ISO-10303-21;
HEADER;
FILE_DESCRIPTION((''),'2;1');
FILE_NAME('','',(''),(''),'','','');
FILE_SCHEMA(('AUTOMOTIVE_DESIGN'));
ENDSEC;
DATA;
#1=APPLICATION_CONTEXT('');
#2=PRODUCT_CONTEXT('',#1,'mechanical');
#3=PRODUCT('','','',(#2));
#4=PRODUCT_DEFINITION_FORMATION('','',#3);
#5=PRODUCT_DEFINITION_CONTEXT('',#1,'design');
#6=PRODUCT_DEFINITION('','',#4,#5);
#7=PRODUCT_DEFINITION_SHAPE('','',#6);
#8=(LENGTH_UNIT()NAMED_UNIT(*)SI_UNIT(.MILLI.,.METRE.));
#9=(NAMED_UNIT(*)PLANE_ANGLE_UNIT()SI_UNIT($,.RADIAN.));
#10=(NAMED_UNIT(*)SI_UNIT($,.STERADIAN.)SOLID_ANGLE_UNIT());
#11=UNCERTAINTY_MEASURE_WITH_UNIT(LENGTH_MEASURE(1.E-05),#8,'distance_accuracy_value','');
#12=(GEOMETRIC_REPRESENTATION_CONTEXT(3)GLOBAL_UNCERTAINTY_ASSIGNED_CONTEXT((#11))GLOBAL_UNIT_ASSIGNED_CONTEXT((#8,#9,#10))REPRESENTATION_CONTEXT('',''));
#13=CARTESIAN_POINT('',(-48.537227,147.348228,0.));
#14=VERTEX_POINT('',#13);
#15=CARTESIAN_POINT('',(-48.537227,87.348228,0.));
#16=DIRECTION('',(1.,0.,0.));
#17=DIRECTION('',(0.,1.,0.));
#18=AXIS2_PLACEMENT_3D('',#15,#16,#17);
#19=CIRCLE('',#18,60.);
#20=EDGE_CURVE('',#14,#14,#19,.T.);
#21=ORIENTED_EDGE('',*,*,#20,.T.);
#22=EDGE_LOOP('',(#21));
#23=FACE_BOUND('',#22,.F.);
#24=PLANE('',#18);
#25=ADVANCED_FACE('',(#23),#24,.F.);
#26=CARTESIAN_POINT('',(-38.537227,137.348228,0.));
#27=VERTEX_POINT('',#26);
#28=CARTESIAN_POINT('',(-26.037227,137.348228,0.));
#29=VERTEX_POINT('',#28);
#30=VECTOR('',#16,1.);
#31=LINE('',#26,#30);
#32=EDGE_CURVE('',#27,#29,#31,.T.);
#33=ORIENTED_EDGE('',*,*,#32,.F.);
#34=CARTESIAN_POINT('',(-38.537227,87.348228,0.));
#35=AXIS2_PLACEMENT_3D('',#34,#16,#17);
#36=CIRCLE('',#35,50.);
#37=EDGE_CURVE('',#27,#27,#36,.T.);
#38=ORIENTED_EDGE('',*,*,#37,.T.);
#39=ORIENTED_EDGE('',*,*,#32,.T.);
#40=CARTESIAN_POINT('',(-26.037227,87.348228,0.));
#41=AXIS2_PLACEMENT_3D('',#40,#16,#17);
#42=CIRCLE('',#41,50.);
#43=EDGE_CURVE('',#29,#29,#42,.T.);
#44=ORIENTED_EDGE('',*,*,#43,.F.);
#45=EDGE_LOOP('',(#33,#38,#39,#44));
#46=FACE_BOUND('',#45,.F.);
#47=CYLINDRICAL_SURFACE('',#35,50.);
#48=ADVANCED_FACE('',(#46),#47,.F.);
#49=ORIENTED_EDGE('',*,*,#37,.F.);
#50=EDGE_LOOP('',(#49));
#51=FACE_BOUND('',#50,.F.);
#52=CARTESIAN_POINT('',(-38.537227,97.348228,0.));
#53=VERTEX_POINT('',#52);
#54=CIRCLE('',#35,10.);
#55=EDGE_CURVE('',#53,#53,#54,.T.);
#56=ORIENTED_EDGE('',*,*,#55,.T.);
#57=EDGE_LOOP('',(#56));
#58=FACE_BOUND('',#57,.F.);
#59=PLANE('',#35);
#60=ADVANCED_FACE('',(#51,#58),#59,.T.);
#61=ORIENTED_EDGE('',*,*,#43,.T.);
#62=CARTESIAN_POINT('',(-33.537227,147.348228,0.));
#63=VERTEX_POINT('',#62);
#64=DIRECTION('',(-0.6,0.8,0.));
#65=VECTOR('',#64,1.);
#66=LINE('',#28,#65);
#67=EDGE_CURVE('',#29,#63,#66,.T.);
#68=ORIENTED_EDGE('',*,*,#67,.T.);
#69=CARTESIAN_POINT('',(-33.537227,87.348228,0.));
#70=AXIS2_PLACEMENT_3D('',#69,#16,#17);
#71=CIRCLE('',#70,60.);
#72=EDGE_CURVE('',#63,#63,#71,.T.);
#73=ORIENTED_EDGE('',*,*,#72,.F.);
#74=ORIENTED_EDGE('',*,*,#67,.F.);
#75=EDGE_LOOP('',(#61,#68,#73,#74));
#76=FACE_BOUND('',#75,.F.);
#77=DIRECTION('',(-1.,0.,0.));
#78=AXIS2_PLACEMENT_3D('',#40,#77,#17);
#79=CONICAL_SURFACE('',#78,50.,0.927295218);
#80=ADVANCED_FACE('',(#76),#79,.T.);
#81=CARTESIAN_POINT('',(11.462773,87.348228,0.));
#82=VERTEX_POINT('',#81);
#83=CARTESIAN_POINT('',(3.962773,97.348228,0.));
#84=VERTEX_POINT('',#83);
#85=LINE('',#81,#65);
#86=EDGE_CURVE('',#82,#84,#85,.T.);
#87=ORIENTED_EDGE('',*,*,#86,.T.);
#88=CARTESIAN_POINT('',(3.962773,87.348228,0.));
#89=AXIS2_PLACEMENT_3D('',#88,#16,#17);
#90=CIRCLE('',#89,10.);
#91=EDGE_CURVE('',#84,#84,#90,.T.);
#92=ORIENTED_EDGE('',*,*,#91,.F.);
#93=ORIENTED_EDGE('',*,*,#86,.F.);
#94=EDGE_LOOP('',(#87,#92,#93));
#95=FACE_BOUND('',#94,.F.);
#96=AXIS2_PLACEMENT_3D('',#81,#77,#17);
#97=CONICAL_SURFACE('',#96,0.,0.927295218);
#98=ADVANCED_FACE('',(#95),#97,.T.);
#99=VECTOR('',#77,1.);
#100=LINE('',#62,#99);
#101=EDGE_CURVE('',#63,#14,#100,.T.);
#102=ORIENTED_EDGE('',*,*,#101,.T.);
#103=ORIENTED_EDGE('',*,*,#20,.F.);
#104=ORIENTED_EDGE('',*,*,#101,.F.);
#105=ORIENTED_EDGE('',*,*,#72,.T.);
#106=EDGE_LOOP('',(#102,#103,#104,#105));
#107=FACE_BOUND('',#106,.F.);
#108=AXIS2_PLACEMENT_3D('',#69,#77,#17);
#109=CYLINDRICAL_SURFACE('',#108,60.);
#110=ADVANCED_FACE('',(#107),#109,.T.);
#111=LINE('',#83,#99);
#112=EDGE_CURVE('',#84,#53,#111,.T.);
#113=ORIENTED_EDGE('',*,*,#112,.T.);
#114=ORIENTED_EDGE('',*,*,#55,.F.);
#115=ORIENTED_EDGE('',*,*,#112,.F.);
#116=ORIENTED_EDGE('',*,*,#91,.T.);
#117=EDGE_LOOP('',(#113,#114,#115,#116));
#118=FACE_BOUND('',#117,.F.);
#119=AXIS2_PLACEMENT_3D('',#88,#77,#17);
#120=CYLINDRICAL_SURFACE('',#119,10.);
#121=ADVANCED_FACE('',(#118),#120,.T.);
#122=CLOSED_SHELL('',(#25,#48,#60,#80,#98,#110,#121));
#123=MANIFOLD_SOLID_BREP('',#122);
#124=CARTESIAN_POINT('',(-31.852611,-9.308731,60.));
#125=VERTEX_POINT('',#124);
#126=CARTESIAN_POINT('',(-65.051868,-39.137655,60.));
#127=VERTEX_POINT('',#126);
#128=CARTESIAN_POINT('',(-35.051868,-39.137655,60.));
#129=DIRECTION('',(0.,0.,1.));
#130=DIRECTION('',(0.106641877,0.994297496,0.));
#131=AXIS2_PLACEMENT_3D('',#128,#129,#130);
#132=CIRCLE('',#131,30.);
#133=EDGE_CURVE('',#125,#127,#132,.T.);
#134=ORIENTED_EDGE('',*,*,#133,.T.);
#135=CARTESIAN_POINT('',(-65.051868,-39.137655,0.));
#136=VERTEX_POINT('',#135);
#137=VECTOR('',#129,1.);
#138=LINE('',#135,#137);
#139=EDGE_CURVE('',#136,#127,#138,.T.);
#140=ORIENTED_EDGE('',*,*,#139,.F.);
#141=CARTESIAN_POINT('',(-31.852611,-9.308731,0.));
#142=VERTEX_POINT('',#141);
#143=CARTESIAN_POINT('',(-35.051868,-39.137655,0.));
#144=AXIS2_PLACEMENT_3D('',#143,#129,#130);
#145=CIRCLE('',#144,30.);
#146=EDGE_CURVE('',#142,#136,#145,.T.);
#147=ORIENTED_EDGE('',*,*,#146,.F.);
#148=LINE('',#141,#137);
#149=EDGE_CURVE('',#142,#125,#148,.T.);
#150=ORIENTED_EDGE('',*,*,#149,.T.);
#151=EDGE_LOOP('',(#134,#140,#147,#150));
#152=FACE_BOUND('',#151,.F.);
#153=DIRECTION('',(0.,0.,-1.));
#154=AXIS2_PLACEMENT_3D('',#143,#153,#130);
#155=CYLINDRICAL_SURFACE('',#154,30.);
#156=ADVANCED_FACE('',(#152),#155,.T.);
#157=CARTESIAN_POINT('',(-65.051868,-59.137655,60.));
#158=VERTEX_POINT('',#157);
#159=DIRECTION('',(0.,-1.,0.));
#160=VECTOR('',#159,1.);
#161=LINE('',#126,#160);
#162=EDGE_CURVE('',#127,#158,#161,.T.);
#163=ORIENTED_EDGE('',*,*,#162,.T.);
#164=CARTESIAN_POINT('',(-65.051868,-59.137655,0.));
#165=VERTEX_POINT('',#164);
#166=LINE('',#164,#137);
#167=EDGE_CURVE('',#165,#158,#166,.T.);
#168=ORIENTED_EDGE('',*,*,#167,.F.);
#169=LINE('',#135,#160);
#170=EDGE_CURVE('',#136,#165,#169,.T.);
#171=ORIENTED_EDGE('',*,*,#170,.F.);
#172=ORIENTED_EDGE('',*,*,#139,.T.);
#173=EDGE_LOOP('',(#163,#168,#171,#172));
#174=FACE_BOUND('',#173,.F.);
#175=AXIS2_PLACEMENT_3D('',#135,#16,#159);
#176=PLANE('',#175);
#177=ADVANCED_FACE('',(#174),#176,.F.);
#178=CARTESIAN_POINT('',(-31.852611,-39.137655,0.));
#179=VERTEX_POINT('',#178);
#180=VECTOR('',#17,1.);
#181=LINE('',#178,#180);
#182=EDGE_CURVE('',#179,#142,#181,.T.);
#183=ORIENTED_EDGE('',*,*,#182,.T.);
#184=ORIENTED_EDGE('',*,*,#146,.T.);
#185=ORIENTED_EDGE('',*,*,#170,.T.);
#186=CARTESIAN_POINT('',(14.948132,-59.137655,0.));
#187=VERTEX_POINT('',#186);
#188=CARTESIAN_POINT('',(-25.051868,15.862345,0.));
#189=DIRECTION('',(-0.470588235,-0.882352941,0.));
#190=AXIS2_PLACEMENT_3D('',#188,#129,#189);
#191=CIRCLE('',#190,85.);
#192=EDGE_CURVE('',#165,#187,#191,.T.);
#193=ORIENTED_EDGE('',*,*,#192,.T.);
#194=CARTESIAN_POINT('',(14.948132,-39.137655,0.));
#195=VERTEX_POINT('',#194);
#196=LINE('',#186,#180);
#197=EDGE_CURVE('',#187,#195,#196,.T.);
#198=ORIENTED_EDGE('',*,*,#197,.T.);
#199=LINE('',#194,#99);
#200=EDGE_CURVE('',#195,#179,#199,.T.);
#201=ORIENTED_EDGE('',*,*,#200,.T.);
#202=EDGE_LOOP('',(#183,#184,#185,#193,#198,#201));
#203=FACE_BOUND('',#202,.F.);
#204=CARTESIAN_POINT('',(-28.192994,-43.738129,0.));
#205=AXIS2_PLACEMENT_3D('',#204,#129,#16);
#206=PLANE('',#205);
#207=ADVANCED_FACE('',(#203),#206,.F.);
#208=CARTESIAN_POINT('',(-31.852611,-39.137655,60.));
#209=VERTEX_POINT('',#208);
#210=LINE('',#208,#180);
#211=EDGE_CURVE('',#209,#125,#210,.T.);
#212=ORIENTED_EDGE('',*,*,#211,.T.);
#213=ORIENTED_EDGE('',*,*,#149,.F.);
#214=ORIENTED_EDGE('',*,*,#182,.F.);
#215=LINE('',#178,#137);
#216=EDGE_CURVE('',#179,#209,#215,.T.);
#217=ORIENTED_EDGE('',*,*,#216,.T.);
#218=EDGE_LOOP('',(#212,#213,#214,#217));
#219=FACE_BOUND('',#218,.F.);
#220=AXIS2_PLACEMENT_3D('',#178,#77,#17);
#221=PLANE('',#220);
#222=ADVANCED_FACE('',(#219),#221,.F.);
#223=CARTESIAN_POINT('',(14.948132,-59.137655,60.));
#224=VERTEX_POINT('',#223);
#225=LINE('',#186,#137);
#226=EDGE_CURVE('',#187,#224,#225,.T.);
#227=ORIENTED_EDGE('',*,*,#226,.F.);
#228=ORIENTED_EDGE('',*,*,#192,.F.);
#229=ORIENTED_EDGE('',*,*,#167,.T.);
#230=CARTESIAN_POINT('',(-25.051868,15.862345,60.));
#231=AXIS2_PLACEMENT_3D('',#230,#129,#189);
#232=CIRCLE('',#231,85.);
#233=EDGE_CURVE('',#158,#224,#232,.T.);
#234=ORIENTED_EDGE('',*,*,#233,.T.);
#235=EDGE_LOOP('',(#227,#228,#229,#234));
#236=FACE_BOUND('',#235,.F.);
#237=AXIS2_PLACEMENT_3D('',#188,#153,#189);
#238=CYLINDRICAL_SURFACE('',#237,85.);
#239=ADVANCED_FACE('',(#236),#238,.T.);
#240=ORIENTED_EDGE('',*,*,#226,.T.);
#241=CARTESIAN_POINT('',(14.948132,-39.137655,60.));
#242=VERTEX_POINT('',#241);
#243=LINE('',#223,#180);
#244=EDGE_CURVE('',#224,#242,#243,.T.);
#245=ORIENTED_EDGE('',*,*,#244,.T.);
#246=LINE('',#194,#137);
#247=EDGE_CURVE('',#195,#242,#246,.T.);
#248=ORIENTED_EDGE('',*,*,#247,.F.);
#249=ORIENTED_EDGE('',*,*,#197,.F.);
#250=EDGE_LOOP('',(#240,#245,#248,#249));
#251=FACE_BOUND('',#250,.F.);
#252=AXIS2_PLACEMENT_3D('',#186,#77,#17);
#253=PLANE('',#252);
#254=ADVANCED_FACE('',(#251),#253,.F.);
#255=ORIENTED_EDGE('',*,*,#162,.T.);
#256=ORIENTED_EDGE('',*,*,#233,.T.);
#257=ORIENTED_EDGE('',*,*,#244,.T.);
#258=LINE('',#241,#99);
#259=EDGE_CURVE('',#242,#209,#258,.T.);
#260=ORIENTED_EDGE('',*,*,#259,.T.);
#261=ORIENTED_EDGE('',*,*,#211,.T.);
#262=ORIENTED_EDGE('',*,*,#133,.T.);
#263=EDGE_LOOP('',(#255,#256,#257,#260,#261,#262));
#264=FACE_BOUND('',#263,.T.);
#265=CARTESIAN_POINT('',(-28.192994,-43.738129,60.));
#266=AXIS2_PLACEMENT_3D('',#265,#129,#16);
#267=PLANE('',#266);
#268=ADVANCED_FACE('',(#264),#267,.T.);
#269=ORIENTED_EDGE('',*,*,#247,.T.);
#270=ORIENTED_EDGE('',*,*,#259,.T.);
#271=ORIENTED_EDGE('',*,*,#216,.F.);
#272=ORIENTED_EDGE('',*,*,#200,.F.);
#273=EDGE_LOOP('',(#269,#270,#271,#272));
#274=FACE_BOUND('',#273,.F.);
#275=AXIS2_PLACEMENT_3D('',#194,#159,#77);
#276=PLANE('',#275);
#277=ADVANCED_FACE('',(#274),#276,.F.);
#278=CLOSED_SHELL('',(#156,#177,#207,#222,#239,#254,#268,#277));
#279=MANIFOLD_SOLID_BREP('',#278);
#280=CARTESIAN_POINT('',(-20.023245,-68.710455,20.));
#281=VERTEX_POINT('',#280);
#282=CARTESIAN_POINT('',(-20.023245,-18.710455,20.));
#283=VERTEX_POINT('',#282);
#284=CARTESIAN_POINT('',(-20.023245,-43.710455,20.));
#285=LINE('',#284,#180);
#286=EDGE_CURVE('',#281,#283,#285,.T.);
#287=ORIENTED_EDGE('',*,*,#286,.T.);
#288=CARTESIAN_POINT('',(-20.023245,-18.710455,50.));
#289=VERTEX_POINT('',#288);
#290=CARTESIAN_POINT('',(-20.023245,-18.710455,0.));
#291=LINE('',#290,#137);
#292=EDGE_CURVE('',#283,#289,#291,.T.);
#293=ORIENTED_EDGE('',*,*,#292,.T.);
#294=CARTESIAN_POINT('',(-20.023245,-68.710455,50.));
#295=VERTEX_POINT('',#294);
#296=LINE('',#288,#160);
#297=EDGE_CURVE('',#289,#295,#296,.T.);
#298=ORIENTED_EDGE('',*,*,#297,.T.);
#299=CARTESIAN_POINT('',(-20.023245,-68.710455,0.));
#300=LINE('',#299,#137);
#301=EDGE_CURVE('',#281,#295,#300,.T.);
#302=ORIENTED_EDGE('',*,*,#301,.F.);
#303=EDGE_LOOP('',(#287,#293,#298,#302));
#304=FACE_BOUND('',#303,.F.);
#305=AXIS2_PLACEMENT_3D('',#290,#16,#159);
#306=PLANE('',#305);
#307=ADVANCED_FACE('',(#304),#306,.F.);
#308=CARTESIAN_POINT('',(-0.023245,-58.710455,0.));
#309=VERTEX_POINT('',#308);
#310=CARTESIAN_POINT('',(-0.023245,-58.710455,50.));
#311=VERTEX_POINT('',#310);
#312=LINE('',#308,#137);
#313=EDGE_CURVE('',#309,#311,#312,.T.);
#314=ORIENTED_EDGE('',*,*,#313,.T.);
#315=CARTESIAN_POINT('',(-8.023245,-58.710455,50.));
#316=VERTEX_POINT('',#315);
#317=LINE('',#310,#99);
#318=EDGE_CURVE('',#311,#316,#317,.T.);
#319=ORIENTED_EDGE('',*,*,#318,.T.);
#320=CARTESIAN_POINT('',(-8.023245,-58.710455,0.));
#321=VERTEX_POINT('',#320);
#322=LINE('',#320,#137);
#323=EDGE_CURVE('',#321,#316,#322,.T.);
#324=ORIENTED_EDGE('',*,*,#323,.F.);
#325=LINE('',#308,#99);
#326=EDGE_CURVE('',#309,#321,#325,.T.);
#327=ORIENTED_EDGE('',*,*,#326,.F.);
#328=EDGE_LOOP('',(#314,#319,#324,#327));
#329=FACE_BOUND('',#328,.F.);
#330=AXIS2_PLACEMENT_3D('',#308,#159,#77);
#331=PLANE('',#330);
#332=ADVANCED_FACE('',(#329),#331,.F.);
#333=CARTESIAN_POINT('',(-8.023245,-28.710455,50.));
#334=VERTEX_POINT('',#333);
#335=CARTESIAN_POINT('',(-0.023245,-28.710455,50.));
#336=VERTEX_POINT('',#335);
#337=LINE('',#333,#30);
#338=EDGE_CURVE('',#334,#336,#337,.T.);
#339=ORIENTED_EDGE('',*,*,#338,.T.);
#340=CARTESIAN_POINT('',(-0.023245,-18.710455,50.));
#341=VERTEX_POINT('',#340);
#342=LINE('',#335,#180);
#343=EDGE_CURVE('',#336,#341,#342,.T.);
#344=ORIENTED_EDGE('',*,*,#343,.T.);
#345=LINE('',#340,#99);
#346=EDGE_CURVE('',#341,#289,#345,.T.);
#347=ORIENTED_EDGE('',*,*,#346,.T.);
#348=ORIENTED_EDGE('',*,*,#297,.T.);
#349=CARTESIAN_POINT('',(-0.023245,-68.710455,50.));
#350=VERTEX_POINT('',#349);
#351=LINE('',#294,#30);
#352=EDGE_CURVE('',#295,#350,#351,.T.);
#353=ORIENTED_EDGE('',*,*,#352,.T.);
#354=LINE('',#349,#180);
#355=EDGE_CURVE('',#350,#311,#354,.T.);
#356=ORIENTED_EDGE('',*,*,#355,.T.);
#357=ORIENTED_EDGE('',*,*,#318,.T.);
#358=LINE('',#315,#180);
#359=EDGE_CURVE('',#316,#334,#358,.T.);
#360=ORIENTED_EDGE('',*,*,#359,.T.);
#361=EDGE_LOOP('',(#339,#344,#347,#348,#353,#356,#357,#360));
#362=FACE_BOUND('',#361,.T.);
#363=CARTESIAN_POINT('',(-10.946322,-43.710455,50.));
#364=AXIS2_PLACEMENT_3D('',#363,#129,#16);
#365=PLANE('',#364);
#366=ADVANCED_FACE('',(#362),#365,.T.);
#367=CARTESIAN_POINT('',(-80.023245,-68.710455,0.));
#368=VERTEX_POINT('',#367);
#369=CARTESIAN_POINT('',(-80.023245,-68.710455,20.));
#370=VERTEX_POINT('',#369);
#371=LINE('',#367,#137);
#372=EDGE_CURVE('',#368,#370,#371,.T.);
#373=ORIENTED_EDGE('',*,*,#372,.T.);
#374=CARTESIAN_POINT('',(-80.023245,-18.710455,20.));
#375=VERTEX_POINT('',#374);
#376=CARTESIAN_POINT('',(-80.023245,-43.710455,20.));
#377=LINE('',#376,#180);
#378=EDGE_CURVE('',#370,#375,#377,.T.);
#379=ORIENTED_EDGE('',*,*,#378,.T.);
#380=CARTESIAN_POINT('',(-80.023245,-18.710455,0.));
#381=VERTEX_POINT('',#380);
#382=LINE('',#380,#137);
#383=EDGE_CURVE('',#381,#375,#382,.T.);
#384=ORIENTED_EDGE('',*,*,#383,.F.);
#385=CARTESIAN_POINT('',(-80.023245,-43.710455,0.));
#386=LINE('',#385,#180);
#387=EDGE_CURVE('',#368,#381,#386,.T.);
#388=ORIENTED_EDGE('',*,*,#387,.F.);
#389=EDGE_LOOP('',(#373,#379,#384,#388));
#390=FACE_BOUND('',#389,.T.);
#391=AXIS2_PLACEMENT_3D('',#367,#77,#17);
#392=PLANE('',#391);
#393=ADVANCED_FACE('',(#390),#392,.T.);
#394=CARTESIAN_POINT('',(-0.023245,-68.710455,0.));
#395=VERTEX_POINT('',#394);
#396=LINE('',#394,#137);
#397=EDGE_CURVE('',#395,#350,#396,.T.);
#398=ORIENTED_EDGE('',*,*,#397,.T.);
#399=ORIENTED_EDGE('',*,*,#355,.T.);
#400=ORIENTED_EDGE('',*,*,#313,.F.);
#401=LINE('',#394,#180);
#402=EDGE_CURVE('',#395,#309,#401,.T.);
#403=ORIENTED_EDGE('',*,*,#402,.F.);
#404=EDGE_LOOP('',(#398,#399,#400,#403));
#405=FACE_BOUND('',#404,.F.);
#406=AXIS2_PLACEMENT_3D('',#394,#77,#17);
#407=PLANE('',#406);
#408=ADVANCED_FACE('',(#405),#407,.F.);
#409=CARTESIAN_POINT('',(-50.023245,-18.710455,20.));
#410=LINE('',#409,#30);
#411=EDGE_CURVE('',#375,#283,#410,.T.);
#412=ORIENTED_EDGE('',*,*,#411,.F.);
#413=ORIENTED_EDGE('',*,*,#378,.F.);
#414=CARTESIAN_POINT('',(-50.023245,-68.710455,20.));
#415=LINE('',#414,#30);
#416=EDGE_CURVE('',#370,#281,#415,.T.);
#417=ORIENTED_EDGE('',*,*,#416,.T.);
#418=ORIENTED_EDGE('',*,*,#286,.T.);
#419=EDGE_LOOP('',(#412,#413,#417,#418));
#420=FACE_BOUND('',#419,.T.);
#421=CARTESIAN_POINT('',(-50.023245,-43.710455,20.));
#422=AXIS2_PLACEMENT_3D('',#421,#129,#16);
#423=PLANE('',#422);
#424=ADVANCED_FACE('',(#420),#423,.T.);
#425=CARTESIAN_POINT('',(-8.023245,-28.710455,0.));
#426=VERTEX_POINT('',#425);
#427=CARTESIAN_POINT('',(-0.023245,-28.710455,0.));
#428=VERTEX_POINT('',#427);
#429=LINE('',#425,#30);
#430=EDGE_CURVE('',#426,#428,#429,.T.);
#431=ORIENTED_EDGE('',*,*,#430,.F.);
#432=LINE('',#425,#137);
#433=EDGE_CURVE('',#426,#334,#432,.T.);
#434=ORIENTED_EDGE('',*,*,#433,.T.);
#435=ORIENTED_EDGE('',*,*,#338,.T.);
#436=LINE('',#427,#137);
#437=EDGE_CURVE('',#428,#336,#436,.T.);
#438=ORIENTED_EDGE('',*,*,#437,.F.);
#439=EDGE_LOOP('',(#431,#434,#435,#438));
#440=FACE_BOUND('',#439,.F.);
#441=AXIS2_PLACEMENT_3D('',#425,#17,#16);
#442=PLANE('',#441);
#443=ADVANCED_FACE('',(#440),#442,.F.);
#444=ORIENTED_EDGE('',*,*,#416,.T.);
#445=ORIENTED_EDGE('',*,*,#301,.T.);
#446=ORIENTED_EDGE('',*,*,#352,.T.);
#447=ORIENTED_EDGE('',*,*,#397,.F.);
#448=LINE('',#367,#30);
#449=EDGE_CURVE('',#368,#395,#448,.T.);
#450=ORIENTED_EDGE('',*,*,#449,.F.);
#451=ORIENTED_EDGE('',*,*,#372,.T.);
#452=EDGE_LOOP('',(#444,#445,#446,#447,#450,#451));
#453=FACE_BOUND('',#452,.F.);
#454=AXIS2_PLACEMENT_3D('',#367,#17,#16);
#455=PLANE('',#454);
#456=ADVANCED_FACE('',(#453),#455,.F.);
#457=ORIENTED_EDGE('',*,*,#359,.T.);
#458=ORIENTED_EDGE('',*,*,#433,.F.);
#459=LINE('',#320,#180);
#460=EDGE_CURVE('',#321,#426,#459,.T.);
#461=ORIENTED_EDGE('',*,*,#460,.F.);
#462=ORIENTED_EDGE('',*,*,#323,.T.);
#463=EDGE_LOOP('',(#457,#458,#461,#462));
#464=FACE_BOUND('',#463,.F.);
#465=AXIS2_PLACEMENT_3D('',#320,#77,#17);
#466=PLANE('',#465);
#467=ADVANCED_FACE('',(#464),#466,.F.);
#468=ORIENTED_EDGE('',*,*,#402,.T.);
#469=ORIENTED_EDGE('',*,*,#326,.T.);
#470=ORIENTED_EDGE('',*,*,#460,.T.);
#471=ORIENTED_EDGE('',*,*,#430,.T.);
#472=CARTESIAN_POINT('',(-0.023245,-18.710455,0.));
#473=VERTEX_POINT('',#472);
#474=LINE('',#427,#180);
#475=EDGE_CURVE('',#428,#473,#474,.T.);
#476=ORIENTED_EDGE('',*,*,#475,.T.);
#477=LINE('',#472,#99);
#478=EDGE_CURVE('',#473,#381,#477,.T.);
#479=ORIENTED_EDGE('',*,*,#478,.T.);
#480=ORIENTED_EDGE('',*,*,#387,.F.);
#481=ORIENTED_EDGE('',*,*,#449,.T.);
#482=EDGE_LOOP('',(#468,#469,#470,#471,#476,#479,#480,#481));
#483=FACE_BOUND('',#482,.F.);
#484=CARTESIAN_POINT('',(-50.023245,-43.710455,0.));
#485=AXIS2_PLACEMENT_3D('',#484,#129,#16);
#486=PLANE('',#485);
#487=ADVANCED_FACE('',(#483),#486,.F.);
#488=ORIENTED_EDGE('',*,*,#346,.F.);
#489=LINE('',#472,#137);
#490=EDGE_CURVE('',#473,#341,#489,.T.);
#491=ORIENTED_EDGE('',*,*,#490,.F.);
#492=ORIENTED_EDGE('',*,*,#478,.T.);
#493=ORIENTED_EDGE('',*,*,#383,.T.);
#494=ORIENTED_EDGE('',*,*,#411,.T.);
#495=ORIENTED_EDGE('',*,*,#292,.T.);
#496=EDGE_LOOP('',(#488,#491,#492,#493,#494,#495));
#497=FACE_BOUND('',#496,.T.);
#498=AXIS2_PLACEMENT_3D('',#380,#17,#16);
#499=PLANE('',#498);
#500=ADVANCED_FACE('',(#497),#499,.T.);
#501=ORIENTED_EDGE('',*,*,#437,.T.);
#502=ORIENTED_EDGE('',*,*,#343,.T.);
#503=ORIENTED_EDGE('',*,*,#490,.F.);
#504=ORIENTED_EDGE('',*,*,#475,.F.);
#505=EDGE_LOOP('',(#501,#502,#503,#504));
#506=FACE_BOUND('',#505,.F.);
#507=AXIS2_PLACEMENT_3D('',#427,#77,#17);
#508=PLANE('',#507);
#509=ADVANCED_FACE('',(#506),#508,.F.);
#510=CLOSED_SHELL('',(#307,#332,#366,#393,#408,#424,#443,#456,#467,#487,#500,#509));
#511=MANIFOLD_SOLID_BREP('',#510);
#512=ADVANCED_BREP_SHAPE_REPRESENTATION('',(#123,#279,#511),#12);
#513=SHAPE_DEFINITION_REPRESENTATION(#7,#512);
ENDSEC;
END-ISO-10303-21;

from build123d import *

# Parameters (mm, degrees)
F2_DEPTH = 60
F5_DEPTH = 50
F4_W     = 60
F4_H     = 50
F6_DEPTH = 20


with BuildPart() as f2:
    # F1 (on Top) → F2 (new body)
    with BuildSketch(Plane.XY):
        with BuildLine():
            Line((-31.8526111987, -39.1376554476), (-31.8526111987, -9.3087305754))
            ThreePointArc((-31.8526111987, -9.3087305754), (-55.1020833547, -16.8219917846), (-65.0518675135, -39.1376554476))
            Line((-65.0518675135, -39.1376554476), (-65.0518675135, -59.1376554476))
            ThreePointArc((-65.0518675135, -59.1376554476), (-25.0518675135, -69.1376554476), (14.9481324865, -59.1376554476))
            Line((14.9481324865, -59.1376554476), (14.9481324865, -39.1376554476))
            Line((14.9481324865, -39.1376554476), (-31.8526111987, -39.1376554476))
        make_face()
    extrude(amount=F2_DEPTH)


with BuildPart() as f3:
    # F0 (on Top) → F3 (revolve)
    with BuildSketch(Plane.XY):
        Polygon((-33.5372266173, 147.348228097), (-48.5372266173, 147.348228097), (-48.5372266173, 87.348228097), (11.4627733827, 87.348228097), (3.9627733824, 97.348228097), (-38.5372266173, 97.348228097), (-38.5372266173, 137.348228097), (-26.0372266173, 137.348228097), align=None)
    revolve(axis=Axis((-18.5372266173, 87.348228097, 0), (1, 0, 0)))


with BuildPart() as f5:
    # F4 (on Top) → F5 (new body)
    with BuildSketch(Plane.XY):
        Polygon((-20.023245162, -18.7104548417), (-20.023245162, -68.7104548417), (-0.023245162, -68.7104548417), (-0.023245162, -58.7104548417), (-8.023245162, -58.7104548417), (-8.023245162, -28.7104548417), (-0.023245162, -28.7104548417), (-0.023245162, -18.7104548417), align=None)
    extrude(amount=F5_DEPTH)

    # F4 (on Top) → F6 (join)
    with BuildSketch(Plane.XY):
        with Locations((-50.023245162, -43.7104548417)):
            Rectangle(F4_W, F4_H)
    extrude(amount=F6_DEPTH)


solid = Compound([f2.part, f3.part, f5.part])
